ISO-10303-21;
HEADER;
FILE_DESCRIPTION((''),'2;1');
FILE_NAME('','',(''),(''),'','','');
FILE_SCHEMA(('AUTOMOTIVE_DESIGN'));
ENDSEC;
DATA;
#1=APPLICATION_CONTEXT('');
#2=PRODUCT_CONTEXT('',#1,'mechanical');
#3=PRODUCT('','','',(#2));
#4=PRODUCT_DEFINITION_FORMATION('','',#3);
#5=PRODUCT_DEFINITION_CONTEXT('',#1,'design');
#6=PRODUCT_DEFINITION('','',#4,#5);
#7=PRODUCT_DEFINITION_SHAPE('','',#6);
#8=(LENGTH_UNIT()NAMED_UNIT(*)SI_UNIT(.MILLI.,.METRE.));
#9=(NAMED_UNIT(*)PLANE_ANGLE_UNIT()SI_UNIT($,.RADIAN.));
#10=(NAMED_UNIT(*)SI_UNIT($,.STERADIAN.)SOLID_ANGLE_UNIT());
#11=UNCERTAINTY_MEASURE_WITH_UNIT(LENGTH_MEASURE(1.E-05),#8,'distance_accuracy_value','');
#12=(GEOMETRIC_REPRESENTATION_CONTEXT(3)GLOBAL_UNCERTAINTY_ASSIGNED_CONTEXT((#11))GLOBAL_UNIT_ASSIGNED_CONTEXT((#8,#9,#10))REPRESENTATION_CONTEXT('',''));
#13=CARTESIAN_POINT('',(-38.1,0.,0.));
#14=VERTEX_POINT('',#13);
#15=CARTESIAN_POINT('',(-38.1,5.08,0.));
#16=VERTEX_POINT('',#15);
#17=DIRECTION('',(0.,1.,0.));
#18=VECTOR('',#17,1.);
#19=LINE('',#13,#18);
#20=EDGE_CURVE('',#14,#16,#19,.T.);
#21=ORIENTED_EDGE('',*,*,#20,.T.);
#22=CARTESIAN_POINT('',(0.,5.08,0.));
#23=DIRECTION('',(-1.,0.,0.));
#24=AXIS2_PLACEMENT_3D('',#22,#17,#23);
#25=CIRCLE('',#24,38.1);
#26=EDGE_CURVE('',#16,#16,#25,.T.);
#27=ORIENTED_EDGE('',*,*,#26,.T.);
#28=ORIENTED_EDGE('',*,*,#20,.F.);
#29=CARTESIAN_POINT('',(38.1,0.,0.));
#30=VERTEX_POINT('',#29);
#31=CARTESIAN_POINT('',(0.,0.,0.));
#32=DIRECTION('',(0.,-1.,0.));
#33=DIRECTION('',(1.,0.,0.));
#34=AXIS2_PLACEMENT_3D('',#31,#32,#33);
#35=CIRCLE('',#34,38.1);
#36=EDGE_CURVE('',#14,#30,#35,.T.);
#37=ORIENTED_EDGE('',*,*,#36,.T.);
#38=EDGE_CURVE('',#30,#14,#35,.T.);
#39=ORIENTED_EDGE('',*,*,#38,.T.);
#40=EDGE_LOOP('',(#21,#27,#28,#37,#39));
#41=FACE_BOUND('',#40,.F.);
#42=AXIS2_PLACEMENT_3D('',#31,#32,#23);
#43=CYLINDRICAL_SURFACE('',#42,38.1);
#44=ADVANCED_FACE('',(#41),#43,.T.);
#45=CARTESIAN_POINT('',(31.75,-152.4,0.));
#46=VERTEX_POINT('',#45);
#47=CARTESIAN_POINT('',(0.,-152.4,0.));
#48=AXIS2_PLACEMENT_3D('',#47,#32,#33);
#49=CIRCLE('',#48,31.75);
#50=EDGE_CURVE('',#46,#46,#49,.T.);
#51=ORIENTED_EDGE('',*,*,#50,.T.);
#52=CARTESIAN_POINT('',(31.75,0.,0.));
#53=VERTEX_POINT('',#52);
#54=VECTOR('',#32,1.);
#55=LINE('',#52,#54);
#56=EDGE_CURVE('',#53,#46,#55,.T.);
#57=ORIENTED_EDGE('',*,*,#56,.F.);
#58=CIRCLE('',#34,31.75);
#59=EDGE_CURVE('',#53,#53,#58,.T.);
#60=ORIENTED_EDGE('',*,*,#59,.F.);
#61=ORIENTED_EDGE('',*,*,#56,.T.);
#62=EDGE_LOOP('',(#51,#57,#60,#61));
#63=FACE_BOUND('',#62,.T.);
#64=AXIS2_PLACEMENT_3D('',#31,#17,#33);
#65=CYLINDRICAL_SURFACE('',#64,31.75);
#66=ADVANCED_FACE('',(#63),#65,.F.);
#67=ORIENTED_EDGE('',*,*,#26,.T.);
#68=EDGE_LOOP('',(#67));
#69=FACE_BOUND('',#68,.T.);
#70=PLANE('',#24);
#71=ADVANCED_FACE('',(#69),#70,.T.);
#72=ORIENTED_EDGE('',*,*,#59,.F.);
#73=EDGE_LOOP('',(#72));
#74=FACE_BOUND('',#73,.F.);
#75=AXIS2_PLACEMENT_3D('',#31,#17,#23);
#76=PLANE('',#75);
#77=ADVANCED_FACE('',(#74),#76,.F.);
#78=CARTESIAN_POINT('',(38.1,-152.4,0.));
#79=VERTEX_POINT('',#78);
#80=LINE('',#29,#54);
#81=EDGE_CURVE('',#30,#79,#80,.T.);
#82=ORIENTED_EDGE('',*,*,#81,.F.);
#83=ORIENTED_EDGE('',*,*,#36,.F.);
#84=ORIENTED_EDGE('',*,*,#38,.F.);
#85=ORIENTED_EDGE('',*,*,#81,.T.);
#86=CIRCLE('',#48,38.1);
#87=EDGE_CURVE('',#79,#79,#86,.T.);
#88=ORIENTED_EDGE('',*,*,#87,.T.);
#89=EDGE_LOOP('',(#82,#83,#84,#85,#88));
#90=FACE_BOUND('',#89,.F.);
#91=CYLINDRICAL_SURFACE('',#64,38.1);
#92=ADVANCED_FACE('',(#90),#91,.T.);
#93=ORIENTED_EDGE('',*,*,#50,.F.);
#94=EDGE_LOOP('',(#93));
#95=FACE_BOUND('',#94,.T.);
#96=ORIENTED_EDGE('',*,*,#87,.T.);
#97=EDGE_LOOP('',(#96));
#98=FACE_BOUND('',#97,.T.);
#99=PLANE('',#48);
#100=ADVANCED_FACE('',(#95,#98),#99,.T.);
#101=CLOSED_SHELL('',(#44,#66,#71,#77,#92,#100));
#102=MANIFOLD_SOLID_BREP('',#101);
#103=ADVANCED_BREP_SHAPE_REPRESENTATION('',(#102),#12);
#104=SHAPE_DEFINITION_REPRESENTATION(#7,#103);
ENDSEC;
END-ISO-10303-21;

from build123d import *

# Parameters (mm, degrees)
F0_R     = 38.1
F0_R_2   = 31.75
F1_DEPTH = 152.4
F2_R     = 38.1
F2_R_2   = 31.75
F3_DEPTH = 5.08


with BuildPart() as f1:
    # F0 (on Front) → F1 (new body)
    with BuildSketch(Plane.XZ):
        Circle(F0_R)
        Circle(F0_R_2, mode=Mode.SUBTRACT)
    extrude(amount=F1_DEPTH)

    # F2 (on face) → F3 (join)
    with BuildSketch(Plane(origin=(0, 0, 0), x_dir=(-1, 0, 0), z_dir=(0, 1, 0))):
        Circle(F2_R)
        Circle(F2_R_2, mode=Mode.SUBTRACT)
        Circle(F2_R_2)
    extrude(amount=F3_DEPTH)


solid = f1.part
